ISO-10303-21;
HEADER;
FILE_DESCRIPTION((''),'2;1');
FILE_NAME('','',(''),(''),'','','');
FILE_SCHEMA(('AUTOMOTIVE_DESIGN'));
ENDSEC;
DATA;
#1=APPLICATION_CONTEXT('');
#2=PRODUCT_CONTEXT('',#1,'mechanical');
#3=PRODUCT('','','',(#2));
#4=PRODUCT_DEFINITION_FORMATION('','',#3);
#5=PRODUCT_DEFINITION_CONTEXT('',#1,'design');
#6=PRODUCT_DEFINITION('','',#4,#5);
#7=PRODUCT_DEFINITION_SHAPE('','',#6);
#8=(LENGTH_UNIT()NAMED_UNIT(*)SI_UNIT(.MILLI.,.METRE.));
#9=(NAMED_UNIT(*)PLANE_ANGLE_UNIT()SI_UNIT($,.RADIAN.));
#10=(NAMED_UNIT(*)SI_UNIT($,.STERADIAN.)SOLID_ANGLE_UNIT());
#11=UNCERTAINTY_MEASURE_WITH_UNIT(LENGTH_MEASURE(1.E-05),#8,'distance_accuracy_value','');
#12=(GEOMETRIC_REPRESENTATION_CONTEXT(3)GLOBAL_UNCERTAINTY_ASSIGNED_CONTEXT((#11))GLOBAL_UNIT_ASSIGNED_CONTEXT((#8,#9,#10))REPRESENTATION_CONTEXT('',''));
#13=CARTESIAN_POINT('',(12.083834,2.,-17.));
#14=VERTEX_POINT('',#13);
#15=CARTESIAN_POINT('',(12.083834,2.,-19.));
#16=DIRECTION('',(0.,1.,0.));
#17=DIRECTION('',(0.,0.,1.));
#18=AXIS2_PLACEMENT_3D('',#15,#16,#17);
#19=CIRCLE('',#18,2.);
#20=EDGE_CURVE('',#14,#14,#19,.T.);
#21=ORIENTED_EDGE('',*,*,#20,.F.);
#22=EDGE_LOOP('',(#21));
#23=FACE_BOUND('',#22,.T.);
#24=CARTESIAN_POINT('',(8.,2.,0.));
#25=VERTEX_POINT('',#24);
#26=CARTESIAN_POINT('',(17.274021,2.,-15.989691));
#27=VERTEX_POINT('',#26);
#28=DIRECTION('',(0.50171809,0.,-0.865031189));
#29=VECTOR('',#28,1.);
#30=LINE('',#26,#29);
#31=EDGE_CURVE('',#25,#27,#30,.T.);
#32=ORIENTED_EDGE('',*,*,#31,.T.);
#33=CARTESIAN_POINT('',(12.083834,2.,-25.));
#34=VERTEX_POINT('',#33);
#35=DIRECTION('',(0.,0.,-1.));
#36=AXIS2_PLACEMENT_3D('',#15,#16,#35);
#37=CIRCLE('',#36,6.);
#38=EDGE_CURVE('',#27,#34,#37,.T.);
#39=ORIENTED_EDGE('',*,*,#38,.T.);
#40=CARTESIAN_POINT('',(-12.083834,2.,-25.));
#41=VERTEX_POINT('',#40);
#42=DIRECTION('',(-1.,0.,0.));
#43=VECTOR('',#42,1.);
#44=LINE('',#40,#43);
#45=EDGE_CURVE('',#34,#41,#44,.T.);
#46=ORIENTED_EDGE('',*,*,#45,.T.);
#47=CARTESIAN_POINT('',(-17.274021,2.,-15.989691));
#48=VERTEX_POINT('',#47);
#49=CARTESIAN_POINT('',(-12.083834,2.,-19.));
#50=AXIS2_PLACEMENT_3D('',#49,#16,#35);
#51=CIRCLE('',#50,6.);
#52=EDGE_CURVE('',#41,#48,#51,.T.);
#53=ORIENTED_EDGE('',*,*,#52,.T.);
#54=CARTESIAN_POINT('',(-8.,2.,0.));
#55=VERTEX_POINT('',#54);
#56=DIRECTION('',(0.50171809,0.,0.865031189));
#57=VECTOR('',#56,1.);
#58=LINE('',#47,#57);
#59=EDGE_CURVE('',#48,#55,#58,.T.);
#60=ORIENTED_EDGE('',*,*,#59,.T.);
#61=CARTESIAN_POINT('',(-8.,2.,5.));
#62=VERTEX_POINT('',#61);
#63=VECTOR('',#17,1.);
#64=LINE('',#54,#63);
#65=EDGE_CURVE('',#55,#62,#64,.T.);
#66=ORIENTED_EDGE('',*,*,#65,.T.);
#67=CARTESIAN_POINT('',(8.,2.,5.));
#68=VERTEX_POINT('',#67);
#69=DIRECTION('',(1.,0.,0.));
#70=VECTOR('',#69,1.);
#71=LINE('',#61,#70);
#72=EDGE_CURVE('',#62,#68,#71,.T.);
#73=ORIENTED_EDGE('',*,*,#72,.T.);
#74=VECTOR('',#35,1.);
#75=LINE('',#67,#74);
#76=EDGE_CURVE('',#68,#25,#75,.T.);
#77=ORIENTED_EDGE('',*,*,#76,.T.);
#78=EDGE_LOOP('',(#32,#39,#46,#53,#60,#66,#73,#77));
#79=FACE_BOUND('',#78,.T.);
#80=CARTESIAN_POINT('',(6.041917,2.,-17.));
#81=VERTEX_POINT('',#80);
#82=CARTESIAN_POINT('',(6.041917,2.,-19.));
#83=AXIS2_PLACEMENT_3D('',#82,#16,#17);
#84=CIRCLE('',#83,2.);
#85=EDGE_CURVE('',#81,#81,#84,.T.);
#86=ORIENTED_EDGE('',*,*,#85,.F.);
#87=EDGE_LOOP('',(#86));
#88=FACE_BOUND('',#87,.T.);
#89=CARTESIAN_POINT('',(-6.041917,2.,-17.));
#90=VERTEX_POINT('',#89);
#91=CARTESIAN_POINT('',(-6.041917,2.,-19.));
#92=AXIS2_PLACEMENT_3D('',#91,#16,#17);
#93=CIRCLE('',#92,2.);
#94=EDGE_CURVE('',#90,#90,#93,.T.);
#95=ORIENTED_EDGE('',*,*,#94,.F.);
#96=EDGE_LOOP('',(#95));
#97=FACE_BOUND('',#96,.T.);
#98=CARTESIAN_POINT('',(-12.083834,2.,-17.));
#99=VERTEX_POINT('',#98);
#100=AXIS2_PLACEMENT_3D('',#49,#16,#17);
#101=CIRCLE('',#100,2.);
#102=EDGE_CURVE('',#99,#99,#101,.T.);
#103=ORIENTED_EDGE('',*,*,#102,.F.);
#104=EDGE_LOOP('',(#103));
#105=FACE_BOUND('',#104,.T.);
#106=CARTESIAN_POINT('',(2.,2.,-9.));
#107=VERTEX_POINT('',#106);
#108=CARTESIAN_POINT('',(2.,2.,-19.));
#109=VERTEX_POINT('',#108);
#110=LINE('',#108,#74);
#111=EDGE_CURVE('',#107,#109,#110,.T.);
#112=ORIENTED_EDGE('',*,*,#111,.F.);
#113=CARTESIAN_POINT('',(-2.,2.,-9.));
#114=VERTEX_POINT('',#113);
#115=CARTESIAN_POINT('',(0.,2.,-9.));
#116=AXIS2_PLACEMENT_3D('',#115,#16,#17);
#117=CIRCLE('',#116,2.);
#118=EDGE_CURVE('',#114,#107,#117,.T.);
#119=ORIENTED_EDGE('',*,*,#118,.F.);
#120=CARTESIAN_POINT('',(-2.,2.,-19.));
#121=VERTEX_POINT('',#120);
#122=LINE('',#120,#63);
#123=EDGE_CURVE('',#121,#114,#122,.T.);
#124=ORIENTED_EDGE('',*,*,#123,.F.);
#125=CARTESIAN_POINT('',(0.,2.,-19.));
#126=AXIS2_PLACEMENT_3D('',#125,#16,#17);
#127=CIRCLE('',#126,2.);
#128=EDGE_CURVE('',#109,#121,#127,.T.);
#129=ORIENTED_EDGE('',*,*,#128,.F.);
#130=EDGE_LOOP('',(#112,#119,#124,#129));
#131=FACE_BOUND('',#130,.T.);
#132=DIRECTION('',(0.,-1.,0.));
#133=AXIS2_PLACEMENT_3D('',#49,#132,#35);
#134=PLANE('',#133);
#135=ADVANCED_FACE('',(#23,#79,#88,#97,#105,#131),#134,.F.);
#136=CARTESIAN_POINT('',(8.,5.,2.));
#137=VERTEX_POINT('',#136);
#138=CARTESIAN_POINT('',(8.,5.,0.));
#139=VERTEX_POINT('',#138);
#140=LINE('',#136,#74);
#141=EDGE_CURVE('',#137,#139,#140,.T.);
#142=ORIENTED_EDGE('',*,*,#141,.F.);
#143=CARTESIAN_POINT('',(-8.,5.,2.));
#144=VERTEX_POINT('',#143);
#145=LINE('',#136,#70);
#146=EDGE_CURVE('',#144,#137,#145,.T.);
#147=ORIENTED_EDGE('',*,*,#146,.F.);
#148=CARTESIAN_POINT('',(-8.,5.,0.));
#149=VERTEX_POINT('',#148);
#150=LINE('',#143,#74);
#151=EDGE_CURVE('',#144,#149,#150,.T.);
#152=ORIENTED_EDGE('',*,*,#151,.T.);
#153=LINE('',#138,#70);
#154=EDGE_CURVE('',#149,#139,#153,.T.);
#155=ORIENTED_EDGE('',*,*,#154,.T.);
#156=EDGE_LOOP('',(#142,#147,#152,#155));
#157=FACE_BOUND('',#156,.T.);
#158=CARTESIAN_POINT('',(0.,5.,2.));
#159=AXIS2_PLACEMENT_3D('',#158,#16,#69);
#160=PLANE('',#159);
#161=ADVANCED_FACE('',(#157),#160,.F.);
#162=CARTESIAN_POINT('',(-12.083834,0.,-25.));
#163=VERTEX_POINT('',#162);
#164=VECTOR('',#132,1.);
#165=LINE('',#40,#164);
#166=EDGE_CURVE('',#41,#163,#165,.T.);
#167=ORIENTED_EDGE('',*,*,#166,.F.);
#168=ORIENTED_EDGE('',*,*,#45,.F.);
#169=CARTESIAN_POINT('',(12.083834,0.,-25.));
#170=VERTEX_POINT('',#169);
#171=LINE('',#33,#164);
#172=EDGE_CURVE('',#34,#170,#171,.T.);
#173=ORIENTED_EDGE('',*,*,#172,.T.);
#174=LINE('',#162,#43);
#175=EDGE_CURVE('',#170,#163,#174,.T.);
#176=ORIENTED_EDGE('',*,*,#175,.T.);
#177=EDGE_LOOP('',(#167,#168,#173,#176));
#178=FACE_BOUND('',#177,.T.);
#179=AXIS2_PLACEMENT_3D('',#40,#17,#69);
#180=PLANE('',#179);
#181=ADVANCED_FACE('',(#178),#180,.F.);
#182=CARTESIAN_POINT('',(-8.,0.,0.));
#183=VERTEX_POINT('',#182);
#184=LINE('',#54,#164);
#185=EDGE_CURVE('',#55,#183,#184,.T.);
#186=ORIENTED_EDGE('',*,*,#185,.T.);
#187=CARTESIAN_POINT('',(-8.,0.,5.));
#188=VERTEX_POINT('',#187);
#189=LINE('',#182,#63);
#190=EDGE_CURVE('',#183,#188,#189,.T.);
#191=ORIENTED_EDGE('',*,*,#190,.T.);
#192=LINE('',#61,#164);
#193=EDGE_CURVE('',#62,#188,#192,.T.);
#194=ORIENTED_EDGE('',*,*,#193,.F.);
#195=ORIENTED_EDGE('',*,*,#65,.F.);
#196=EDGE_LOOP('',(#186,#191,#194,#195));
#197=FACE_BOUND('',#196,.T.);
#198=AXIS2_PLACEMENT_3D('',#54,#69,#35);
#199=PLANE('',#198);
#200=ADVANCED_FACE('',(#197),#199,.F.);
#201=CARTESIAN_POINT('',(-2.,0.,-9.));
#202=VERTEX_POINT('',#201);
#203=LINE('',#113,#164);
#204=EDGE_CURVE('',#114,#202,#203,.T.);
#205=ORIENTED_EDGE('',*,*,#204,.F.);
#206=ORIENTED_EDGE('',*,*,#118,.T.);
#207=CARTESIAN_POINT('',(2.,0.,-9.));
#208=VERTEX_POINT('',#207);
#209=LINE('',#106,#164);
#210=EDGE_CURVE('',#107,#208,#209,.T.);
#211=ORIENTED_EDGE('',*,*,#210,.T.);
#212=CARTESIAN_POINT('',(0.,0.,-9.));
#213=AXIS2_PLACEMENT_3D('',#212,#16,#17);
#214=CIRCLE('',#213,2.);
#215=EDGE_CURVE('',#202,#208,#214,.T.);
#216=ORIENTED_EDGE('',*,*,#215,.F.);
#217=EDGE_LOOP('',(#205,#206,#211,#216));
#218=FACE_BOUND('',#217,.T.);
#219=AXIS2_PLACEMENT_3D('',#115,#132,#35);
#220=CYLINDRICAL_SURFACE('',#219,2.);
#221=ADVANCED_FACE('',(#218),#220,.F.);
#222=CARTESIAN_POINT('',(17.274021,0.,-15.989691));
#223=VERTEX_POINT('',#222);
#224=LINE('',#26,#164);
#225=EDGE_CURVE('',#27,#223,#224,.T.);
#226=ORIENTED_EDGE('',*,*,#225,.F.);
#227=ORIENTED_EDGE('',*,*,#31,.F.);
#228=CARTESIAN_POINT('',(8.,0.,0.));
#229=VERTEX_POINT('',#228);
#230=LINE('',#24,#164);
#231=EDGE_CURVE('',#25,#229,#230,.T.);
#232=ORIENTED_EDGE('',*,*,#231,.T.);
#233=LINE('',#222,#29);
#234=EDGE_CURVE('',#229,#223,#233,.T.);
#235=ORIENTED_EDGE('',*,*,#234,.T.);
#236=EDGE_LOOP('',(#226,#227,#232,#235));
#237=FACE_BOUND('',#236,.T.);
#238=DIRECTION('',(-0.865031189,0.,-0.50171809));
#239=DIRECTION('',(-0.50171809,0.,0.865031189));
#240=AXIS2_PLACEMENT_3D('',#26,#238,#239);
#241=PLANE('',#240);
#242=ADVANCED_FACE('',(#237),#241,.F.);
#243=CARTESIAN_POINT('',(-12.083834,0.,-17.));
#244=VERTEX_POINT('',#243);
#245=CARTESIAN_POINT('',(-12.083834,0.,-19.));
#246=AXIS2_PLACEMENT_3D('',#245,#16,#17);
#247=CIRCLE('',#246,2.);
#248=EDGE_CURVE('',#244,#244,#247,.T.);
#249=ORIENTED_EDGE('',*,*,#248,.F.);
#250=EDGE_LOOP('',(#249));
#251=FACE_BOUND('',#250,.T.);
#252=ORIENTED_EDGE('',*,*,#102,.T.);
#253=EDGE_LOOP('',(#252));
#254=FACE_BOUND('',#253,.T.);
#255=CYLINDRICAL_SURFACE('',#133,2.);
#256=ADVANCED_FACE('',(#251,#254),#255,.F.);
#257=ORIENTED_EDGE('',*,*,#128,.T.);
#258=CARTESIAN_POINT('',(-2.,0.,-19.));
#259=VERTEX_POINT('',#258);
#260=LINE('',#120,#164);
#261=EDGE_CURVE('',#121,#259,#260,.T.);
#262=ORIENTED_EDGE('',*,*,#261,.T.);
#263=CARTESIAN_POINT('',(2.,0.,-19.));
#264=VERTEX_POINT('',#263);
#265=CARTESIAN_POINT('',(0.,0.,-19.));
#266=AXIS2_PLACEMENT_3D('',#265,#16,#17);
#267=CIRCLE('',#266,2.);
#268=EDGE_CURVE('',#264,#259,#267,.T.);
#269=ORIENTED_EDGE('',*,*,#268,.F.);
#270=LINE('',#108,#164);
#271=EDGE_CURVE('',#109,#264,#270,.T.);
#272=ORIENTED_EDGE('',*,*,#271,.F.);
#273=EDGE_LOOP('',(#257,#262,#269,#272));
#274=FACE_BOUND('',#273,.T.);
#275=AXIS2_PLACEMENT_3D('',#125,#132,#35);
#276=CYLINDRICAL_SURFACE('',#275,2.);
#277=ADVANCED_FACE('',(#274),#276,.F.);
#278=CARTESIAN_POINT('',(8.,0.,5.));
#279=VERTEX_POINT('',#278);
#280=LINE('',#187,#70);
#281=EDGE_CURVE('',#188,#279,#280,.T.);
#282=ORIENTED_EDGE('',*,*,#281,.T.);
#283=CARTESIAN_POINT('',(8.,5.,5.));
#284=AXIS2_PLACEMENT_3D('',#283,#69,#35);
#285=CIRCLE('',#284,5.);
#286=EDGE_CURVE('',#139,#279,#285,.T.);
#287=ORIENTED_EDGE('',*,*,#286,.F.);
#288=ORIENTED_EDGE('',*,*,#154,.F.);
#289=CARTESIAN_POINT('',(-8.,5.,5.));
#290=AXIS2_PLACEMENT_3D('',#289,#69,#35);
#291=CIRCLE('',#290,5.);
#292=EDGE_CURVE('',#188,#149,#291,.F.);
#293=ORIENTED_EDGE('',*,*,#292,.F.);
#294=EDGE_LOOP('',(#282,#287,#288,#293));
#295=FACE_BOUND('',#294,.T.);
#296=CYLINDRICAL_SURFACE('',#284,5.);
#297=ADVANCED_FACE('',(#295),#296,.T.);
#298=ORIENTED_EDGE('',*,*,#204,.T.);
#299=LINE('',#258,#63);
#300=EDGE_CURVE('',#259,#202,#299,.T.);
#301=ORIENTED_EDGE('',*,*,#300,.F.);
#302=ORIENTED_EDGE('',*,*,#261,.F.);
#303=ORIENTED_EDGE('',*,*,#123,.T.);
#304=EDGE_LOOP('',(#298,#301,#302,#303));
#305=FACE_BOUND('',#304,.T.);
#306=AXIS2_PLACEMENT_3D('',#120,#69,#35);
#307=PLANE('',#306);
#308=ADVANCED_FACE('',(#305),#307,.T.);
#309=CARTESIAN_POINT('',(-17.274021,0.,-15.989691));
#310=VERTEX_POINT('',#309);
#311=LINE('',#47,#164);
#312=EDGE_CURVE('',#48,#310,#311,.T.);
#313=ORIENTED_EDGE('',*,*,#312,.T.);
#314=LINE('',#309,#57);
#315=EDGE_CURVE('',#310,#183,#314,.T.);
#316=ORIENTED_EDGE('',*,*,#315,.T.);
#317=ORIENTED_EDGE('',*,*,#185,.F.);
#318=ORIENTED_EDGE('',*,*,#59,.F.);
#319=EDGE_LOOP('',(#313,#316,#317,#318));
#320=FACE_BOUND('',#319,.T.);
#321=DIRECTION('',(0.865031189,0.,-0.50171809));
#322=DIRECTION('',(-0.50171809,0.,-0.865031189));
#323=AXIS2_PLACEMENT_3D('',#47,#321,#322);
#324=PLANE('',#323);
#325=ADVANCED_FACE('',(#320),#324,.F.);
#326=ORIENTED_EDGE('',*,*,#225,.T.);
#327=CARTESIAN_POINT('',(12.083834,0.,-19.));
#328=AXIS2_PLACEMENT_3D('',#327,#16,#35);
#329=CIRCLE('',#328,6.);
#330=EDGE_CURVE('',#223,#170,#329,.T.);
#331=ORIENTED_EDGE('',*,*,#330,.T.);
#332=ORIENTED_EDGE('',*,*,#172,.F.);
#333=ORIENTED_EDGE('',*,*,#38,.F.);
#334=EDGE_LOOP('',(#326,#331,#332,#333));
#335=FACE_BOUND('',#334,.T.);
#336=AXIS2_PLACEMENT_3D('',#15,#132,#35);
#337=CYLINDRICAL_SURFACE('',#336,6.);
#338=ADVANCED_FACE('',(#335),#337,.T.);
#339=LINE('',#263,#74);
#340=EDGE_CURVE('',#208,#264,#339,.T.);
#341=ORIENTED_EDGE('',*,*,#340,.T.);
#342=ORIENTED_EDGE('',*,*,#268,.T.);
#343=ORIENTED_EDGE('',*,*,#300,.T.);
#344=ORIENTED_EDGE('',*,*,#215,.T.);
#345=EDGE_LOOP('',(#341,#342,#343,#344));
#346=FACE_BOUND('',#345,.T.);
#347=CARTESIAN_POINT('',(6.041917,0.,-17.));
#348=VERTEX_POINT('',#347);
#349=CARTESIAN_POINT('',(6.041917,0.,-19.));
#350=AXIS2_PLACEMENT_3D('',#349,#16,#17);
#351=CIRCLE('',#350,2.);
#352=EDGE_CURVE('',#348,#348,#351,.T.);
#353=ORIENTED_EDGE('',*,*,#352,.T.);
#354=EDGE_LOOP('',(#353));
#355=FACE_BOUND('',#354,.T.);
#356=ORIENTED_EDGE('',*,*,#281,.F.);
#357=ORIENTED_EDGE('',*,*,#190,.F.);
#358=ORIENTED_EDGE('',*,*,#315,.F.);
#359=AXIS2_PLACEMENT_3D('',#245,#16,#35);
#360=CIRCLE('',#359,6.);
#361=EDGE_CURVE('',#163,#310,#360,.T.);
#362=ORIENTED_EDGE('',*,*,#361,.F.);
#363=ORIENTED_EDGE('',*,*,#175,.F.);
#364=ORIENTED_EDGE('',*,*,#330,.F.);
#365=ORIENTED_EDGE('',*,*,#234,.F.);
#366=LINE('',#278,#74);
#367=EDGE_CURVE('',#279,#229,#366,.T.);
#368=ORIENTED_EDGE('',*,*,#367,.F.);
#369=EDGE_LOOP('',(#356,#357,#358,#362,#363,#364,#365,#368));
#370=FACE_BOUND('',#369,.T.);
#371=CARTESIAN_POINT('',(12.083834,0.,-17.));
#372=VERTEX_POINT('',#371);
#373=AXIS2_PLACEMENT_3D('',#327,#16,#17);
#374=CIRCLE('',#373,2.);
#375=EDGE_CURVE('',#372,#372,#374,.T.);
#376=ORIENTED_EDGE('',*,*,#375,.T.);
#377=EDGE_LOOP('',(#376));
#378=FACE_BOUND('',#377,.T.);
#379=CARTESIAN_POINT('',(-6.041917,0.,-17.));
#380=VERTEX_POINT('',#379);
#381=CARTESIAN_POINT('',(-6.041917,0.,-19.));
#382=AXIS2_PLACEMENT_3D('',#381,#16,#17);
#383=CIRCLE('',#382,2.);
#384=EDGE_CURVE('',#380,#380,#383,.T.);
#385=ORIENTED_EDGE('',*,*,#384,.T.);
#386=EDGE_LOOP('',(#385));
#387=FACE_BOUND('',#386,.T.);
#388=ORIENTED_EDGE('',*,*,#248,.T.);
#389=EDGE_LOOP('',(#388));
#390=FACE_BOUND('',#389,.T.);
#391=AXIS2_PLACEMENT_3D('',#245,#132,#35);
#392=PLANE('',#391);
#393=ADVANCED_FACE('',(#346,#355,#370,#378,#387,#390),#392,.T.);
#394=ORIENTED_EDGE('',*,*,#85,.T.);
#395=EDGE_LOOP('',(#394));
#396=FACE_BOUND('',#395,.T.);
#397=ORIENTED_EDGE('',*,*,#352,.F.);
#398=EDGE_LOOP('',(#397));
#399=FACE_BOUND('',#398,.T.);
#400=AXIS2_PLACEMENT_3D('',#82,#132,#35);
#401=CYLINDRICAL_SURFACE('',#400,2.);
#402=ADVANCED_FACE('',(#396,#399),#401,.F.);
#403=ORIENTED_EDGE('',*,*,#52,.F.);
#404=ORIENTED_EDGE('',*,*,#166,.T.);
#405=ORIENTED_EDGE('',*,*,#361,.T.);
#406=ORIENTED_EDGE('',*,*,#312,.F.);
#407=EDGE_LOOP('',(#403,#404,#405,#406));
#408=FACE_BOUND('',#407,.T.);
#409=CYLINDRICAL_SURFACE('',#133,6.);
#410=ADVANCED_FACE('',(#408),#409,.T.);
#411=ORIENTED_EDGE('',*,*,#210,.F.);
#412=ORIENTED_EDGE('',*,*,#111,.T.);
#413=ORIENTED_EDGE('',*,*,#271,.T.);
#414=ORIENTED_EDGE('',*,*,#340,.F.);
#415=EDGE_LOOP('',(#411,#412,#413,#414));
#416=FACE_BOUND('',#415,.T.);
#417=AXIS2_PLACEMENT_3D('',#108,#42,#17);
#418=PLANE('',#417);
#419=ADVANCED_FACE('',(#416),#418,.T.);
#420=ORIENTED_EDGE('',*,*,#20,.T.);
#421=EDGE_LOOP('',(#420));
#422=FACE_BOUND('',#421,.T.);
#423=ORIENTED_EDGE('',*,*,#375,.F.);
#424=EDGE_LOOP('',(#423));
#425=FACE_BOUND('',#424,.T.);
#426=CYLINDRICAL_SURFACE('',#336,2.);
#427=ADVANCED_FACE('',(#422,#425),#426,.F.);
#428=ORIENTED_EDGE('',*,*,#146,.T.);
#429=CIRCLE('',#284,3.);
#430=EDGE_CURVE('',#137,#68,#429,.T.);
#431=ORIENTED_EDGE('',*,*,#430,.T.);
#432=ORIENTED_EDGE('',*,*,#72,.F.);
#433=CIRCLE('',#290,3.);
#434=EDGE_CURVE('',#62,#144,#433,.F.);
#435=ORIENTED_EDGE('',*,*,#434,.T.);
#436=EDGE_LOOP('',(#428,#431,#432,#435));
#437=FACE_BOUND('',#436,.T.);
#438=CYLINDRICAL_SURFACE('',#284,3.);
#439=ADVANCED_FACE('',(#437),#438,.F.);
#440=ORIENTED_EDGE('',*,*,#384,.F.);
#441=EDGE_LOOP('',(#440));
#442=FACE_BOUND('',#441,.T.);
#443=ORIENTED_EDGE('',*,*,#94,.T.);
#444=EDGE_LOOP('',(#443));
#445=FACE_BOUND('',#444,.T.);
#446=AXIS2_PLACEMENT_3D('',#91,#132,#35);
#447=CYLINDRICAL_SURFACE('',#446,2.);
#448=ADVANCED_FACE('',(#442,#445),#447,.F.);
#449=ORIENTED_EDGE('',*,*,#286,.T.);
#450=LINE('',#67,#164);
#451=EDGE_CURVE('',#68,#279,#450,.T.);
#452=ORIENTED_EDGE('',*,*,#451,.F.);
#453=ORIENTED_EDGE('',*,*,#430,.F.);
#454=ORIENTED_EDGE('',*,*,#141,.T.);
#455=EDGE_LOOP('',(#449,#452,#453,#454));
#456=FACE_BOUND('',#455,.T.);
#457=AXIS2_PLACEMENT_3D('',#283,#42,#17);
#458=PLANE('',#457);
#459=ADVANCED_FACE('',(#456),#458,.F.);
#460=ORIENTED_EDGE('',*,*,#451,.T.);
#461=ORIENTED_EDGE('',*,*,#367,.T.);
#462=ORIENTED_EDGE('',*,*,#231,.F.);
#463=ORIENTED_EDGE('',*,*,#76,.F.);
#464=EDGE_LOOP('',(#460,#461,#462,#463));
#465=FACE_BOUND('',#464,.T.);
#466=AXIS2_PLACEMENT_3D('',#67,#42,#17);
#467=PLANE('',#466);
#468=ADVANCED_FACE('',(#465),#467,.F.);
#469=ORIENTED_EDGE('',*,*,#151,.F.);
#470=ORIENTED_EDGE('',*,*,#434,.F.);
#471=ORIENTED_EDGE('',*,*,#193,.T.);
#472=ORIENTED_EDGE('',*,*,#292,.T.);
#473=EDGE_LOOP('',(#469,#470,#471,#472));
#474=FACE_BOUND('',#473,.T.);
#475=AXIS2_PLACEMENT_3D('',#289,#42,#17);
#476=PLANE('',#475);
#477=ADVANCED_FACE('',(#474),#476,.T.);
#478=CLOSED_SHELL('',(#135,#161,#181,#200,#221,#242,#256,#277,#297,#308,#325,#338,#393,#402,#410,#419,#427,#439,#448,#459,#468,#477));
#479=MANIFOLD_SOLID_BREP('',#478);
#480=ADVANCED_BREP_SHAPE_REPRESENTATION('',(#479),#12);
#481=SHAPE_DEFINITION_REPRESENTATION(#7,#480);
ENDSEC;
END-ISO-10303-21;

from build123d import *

# Parameters (mm, degrees)
SKETCH_1_R             = 2
SM_BASE_FLANGE_1_DEPTH = 2
OTHER_START            = -8
OTHER_1_DEPTH          = 16


# Read off the part's stored shape, not the designer's step: 褶边1
# Sheet-metal steps are written as plain solids
with BuildPart() as part:
    # Sketch 1 → 基体-法兰1 (new body)
    with BuildSketch(Plane(origin=(0, 0, 0), x_dir=(1, 0, 0), z_dir=(0, 1, 0))):
        with BuildLine():
            Line((-12.083833912, 25), (12.083833912, 25))
            ThreePointArc((12.083833912, 25), (17.282961302, 21.994841295), (17.274021048, 15.989691461))
            Line((17.274021048, 15.989691461), (8, 0))
            Line((8, 0), (8, -5))
            Line((8, -5), (-8, -5))
            Line((-8, -5), (-8, 0))
            Line((-8, 0), (-17.274021048, 15.989691461))
            ThreePointArc((-17.274021048, 15.989691461), (-17.282961302, 21.994841295), (-12.083833912, 25))
        make_face()
        with Locations(Location((-12.083833912, 19, 0), (0, 0, 270))):
            Circle(SKETCH_1_R, mode=Mode.SUBTRACT)
        with Locations(Location((-6.041916956, 19, 0), (0, 0, 270))):
            Circle(SKETCH_1_R, mode=Mode.SUBTRACT)
        with Locations(Location((6.041916956, 19, 0), (0, 0, 270))):
            Circle(SKETCH_1_R, mode=Mode.SUBTRACT)
        with Locations(Location((12.083833912, 19, 0), (0, 0, 270))):
            Circle(SKETCH_1_R, mode=Mode.SUBTRACT)
        with BuildLine():
            Line((-2, 19), (-2, 9))
            ThreePointArc((-2, 9), (0, 7), (2, 9))
            Line((2, 9), (2, 19))
            ThreePointArc((2, 19), (0, 21), (-2, 19))
        make_face(mode=Mode.SUBTRACT)
    extrude(amount=SM_BASE_FLANGE_1_DEPTH)

    # Other 1 outline → Other 1 (add)
    with BuildSketch(Plane.YZ.offset(OTHER_START)):
        with BuildLine():
            Line((5, 2), (5, 0))
            ThreePointArc((5, 0), (8.535533906, 8.535533906), (0, 5))
            Line((0, 5), (2, 5))
            ThreePointArc((2, 5), (7.121320344, 7.121320344), (5, 2))
        make_face()
    extrude(amount=OTHER_1_DEPTH)


solid = part.part
